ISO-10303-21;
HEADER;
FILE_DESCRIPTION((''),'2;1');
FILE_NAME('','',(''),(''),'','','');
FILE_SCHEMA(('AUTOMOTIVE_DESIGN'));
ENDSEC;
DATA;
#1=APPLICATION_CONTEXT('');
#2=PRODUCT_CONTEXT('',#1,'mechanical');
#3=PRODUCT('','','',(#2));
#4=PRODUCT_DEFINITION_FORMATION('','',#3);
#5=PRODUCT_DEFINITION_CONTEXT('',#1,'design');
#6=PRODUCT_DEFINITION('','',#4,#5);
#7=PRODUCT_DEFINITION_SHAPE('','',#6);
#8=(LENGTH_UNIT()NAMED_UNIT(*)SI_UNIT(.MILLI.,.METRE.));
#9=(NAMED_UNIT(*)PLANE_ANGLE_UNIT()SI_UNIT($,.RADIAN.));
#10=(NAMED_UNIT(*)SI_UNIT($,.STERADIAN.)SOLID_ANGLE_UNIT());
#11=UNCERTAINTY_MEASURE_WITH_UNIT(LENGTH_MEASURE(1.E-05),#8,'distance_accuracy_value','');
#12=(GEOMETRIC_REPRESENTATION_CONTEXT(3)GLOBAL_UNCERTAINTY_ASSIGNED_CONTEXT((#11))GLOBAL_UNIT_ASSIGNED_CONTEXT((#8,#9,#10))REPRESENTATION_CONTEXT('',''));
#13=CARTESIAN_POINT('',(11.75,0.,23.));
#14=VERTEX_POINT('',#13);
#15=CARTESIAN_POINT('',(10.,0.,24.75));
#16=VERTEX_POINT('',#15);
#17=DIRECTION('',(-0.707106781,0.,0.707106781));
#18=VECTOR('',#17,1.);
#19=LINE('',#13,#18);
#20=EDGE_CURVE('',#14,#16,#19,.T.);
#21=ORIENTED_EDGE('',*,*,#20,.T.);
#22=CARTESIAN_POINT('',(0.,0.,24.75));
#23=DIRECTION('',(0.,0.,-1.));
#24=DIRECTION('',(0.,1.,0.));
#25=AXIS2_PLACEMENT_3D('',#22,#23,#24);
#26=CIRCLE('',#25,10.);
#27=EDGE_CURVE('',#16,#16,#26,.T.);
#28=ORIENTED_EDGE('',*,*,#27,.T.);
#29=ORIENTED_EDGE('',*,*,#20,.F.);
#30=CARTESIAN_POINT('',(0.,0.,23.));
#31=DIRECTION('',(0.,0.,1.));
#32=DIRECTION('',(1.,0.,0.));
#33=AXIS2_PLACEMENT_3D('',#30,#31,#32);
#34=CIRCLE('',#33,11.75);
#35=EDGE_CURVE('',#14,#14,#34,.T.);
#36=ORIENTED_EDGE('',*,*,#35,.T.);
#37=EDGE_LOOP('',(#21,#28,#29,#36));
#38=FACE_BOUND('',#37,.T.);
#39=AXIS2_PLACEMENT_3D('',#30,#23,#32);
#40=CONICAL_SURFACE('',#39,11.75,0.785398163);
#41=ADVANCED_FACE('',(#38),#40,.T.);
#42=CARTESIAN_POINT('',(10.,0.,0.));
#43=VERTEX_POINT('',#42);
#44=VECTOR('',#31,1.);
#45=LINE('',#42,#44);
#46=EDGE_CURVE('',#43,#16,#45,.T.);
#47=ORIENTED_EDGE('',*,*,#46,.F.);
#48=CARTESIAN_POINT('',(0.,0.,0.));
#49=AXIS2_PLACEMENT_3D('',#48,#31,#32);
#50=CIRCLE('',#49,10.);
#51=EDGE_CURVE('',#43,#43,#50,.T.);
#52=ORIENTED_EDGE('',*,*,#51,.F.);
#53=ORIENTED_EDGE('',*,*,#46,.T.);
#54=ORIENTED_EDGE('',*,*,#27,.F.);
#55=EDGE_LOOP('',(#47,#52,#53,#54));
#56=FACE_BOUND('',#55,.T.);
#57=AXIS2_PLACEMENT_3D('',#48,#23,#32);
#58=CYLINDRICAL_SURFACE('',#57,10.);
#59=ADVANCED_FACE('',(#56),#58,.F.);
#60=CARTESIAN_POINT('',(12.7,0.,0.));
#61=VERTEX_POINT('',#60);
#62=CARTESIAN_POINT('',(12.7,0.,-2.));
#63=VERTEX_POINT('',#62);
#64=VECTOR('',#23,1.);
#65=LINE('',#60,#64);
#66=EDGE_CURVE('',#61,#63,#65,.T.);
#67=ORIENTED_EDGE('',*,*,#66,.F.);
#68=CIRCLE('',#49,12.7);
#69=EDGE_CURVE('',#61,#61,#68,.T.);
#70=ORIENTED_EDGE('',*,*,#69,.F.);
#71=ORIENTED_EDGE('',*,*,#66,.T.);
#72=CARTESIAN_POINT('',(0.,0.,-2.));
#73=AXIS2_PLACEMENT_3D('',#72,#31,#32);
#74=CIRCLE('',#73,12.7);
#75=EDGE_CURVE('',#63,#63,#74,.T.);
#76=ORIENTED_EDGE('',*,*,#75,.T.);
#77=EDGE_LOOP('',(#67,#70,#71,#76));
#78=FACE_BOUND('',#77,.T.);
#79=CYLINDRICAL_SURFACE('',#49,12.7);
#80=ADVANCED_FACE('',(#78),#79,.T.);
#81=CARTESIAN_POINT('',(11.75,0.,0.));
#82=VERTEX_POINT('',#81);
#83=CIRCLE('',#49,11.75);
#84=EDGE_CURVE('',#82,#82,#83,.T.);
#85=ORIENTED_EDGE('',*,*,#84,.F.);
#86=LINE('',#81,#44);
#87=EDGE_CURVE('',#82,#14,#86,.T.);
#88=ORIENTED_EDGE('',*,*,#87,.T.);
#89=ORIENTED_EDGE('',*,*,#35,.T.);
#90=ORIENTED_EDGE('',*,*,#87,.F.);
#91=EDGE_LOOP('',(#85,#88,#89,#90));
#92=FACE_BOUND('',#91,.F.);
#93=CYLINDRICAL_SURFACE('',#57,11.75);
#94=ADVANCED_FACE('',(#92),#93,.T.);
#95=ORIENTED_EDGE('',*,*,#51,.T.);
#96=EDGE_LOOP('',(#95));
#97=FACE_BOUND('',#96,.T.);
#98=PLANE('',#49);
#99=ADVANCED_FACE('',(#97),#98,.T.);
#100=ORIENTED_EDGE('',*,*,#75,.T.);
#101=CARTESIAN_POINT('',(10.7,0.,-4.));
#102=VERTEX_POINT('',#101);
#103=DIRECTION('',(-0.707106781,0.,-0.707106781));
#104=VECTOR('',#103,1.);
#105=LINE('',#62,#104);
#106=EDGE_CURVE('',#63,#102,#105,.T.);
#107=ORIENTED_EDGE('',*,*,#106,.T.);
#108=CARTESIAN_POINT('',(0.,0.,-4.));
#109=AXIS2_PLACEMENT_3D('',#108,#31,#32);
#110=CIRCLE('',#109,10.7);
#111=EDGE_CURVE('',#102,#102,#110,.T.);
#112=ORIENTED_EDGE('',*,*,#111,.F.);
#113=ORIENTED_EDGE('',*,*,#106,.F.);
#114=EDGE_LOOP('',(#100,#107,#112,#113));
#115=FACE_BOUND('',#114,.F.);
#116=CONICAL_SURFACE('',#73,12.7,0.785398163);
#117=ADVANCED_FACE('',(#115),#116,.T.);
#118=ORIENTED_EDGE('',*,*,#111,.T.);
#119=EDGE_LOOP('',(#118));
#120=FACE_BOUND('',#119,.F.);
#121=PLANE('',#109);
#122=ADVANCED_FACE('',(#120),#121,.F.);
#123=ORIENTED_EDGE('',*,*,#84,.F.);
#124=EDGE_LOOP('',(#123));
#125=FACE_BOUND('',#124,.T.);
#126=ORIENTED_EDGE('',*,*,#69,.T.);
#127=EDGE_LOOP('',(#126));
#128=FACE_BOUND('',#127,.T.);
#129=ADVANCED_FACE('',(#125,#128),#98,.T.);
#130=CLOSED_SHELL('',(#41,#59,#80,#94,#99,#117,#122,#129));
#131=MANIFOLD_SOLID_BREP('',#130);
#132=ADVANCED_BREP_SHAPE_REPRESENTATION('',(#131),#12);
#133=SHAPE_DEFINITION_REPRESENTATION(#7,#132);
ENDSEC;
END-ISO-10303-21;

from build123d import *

# Parameters (mm, degrees)
F0_R     = 12.7
F0_R_2   = 11.75
F0_R_3   = 10
F1_DEPTH = 4
F2_DEPTH = 25


# Not quite as in the source:
# - a fillet or chamfer that OpenCascade refuses, or shapes differently, is made with other operations: its cross-section is extruded or revolved along the edge and cut away or added


with BuildPart() as f1:
    # F0 (on Top) → F1 (new body)
    with BuildSketch(Plane.XY):
        Circle(F0_R)
        Circle(F0_R_2, mode=Mode.SUBTRACT)
        Circle(F0_R_2)
        Circle(F0_R_3, mode=Mode.SUBTRACT)
        Circle(F0_R_3)
    extrude(amount=-F1_DEPTH)

    # F0 (on Top) → F2 (join)
    with BuildSketch(Plane.XY):
        Circle(F0_R_2)
        Circle(F0_R_3, mode=Mode.SUBTRACT)
    extrude(amount=F2_DEPTH)

    # F3: chamfer of 2 on 2 edges, made by hand

    # F3_s1 → F3_t2 (revolve, cut)
    with BuildSketch(Plane.XZ):
        Polygon((11.75, 23), (9.75, 25), (11.75, 25), align=None)
    revolve(axis=Axis((0, 0, 25), (0, 0, 1)), mode=Mode.SUBTRACT)

    # F3_s3 → F3_t4 (revolve, cut)
    with BuildSketch(Plane.XZ):
        Polygon((12.7, -2), (10.7, -4), (12.7, -4), align=None)
    revolve(axis=Axis((0, 0, -4), (0, 0, 1)), mode=Mode.SUBTRACT)


solid = f1.part
